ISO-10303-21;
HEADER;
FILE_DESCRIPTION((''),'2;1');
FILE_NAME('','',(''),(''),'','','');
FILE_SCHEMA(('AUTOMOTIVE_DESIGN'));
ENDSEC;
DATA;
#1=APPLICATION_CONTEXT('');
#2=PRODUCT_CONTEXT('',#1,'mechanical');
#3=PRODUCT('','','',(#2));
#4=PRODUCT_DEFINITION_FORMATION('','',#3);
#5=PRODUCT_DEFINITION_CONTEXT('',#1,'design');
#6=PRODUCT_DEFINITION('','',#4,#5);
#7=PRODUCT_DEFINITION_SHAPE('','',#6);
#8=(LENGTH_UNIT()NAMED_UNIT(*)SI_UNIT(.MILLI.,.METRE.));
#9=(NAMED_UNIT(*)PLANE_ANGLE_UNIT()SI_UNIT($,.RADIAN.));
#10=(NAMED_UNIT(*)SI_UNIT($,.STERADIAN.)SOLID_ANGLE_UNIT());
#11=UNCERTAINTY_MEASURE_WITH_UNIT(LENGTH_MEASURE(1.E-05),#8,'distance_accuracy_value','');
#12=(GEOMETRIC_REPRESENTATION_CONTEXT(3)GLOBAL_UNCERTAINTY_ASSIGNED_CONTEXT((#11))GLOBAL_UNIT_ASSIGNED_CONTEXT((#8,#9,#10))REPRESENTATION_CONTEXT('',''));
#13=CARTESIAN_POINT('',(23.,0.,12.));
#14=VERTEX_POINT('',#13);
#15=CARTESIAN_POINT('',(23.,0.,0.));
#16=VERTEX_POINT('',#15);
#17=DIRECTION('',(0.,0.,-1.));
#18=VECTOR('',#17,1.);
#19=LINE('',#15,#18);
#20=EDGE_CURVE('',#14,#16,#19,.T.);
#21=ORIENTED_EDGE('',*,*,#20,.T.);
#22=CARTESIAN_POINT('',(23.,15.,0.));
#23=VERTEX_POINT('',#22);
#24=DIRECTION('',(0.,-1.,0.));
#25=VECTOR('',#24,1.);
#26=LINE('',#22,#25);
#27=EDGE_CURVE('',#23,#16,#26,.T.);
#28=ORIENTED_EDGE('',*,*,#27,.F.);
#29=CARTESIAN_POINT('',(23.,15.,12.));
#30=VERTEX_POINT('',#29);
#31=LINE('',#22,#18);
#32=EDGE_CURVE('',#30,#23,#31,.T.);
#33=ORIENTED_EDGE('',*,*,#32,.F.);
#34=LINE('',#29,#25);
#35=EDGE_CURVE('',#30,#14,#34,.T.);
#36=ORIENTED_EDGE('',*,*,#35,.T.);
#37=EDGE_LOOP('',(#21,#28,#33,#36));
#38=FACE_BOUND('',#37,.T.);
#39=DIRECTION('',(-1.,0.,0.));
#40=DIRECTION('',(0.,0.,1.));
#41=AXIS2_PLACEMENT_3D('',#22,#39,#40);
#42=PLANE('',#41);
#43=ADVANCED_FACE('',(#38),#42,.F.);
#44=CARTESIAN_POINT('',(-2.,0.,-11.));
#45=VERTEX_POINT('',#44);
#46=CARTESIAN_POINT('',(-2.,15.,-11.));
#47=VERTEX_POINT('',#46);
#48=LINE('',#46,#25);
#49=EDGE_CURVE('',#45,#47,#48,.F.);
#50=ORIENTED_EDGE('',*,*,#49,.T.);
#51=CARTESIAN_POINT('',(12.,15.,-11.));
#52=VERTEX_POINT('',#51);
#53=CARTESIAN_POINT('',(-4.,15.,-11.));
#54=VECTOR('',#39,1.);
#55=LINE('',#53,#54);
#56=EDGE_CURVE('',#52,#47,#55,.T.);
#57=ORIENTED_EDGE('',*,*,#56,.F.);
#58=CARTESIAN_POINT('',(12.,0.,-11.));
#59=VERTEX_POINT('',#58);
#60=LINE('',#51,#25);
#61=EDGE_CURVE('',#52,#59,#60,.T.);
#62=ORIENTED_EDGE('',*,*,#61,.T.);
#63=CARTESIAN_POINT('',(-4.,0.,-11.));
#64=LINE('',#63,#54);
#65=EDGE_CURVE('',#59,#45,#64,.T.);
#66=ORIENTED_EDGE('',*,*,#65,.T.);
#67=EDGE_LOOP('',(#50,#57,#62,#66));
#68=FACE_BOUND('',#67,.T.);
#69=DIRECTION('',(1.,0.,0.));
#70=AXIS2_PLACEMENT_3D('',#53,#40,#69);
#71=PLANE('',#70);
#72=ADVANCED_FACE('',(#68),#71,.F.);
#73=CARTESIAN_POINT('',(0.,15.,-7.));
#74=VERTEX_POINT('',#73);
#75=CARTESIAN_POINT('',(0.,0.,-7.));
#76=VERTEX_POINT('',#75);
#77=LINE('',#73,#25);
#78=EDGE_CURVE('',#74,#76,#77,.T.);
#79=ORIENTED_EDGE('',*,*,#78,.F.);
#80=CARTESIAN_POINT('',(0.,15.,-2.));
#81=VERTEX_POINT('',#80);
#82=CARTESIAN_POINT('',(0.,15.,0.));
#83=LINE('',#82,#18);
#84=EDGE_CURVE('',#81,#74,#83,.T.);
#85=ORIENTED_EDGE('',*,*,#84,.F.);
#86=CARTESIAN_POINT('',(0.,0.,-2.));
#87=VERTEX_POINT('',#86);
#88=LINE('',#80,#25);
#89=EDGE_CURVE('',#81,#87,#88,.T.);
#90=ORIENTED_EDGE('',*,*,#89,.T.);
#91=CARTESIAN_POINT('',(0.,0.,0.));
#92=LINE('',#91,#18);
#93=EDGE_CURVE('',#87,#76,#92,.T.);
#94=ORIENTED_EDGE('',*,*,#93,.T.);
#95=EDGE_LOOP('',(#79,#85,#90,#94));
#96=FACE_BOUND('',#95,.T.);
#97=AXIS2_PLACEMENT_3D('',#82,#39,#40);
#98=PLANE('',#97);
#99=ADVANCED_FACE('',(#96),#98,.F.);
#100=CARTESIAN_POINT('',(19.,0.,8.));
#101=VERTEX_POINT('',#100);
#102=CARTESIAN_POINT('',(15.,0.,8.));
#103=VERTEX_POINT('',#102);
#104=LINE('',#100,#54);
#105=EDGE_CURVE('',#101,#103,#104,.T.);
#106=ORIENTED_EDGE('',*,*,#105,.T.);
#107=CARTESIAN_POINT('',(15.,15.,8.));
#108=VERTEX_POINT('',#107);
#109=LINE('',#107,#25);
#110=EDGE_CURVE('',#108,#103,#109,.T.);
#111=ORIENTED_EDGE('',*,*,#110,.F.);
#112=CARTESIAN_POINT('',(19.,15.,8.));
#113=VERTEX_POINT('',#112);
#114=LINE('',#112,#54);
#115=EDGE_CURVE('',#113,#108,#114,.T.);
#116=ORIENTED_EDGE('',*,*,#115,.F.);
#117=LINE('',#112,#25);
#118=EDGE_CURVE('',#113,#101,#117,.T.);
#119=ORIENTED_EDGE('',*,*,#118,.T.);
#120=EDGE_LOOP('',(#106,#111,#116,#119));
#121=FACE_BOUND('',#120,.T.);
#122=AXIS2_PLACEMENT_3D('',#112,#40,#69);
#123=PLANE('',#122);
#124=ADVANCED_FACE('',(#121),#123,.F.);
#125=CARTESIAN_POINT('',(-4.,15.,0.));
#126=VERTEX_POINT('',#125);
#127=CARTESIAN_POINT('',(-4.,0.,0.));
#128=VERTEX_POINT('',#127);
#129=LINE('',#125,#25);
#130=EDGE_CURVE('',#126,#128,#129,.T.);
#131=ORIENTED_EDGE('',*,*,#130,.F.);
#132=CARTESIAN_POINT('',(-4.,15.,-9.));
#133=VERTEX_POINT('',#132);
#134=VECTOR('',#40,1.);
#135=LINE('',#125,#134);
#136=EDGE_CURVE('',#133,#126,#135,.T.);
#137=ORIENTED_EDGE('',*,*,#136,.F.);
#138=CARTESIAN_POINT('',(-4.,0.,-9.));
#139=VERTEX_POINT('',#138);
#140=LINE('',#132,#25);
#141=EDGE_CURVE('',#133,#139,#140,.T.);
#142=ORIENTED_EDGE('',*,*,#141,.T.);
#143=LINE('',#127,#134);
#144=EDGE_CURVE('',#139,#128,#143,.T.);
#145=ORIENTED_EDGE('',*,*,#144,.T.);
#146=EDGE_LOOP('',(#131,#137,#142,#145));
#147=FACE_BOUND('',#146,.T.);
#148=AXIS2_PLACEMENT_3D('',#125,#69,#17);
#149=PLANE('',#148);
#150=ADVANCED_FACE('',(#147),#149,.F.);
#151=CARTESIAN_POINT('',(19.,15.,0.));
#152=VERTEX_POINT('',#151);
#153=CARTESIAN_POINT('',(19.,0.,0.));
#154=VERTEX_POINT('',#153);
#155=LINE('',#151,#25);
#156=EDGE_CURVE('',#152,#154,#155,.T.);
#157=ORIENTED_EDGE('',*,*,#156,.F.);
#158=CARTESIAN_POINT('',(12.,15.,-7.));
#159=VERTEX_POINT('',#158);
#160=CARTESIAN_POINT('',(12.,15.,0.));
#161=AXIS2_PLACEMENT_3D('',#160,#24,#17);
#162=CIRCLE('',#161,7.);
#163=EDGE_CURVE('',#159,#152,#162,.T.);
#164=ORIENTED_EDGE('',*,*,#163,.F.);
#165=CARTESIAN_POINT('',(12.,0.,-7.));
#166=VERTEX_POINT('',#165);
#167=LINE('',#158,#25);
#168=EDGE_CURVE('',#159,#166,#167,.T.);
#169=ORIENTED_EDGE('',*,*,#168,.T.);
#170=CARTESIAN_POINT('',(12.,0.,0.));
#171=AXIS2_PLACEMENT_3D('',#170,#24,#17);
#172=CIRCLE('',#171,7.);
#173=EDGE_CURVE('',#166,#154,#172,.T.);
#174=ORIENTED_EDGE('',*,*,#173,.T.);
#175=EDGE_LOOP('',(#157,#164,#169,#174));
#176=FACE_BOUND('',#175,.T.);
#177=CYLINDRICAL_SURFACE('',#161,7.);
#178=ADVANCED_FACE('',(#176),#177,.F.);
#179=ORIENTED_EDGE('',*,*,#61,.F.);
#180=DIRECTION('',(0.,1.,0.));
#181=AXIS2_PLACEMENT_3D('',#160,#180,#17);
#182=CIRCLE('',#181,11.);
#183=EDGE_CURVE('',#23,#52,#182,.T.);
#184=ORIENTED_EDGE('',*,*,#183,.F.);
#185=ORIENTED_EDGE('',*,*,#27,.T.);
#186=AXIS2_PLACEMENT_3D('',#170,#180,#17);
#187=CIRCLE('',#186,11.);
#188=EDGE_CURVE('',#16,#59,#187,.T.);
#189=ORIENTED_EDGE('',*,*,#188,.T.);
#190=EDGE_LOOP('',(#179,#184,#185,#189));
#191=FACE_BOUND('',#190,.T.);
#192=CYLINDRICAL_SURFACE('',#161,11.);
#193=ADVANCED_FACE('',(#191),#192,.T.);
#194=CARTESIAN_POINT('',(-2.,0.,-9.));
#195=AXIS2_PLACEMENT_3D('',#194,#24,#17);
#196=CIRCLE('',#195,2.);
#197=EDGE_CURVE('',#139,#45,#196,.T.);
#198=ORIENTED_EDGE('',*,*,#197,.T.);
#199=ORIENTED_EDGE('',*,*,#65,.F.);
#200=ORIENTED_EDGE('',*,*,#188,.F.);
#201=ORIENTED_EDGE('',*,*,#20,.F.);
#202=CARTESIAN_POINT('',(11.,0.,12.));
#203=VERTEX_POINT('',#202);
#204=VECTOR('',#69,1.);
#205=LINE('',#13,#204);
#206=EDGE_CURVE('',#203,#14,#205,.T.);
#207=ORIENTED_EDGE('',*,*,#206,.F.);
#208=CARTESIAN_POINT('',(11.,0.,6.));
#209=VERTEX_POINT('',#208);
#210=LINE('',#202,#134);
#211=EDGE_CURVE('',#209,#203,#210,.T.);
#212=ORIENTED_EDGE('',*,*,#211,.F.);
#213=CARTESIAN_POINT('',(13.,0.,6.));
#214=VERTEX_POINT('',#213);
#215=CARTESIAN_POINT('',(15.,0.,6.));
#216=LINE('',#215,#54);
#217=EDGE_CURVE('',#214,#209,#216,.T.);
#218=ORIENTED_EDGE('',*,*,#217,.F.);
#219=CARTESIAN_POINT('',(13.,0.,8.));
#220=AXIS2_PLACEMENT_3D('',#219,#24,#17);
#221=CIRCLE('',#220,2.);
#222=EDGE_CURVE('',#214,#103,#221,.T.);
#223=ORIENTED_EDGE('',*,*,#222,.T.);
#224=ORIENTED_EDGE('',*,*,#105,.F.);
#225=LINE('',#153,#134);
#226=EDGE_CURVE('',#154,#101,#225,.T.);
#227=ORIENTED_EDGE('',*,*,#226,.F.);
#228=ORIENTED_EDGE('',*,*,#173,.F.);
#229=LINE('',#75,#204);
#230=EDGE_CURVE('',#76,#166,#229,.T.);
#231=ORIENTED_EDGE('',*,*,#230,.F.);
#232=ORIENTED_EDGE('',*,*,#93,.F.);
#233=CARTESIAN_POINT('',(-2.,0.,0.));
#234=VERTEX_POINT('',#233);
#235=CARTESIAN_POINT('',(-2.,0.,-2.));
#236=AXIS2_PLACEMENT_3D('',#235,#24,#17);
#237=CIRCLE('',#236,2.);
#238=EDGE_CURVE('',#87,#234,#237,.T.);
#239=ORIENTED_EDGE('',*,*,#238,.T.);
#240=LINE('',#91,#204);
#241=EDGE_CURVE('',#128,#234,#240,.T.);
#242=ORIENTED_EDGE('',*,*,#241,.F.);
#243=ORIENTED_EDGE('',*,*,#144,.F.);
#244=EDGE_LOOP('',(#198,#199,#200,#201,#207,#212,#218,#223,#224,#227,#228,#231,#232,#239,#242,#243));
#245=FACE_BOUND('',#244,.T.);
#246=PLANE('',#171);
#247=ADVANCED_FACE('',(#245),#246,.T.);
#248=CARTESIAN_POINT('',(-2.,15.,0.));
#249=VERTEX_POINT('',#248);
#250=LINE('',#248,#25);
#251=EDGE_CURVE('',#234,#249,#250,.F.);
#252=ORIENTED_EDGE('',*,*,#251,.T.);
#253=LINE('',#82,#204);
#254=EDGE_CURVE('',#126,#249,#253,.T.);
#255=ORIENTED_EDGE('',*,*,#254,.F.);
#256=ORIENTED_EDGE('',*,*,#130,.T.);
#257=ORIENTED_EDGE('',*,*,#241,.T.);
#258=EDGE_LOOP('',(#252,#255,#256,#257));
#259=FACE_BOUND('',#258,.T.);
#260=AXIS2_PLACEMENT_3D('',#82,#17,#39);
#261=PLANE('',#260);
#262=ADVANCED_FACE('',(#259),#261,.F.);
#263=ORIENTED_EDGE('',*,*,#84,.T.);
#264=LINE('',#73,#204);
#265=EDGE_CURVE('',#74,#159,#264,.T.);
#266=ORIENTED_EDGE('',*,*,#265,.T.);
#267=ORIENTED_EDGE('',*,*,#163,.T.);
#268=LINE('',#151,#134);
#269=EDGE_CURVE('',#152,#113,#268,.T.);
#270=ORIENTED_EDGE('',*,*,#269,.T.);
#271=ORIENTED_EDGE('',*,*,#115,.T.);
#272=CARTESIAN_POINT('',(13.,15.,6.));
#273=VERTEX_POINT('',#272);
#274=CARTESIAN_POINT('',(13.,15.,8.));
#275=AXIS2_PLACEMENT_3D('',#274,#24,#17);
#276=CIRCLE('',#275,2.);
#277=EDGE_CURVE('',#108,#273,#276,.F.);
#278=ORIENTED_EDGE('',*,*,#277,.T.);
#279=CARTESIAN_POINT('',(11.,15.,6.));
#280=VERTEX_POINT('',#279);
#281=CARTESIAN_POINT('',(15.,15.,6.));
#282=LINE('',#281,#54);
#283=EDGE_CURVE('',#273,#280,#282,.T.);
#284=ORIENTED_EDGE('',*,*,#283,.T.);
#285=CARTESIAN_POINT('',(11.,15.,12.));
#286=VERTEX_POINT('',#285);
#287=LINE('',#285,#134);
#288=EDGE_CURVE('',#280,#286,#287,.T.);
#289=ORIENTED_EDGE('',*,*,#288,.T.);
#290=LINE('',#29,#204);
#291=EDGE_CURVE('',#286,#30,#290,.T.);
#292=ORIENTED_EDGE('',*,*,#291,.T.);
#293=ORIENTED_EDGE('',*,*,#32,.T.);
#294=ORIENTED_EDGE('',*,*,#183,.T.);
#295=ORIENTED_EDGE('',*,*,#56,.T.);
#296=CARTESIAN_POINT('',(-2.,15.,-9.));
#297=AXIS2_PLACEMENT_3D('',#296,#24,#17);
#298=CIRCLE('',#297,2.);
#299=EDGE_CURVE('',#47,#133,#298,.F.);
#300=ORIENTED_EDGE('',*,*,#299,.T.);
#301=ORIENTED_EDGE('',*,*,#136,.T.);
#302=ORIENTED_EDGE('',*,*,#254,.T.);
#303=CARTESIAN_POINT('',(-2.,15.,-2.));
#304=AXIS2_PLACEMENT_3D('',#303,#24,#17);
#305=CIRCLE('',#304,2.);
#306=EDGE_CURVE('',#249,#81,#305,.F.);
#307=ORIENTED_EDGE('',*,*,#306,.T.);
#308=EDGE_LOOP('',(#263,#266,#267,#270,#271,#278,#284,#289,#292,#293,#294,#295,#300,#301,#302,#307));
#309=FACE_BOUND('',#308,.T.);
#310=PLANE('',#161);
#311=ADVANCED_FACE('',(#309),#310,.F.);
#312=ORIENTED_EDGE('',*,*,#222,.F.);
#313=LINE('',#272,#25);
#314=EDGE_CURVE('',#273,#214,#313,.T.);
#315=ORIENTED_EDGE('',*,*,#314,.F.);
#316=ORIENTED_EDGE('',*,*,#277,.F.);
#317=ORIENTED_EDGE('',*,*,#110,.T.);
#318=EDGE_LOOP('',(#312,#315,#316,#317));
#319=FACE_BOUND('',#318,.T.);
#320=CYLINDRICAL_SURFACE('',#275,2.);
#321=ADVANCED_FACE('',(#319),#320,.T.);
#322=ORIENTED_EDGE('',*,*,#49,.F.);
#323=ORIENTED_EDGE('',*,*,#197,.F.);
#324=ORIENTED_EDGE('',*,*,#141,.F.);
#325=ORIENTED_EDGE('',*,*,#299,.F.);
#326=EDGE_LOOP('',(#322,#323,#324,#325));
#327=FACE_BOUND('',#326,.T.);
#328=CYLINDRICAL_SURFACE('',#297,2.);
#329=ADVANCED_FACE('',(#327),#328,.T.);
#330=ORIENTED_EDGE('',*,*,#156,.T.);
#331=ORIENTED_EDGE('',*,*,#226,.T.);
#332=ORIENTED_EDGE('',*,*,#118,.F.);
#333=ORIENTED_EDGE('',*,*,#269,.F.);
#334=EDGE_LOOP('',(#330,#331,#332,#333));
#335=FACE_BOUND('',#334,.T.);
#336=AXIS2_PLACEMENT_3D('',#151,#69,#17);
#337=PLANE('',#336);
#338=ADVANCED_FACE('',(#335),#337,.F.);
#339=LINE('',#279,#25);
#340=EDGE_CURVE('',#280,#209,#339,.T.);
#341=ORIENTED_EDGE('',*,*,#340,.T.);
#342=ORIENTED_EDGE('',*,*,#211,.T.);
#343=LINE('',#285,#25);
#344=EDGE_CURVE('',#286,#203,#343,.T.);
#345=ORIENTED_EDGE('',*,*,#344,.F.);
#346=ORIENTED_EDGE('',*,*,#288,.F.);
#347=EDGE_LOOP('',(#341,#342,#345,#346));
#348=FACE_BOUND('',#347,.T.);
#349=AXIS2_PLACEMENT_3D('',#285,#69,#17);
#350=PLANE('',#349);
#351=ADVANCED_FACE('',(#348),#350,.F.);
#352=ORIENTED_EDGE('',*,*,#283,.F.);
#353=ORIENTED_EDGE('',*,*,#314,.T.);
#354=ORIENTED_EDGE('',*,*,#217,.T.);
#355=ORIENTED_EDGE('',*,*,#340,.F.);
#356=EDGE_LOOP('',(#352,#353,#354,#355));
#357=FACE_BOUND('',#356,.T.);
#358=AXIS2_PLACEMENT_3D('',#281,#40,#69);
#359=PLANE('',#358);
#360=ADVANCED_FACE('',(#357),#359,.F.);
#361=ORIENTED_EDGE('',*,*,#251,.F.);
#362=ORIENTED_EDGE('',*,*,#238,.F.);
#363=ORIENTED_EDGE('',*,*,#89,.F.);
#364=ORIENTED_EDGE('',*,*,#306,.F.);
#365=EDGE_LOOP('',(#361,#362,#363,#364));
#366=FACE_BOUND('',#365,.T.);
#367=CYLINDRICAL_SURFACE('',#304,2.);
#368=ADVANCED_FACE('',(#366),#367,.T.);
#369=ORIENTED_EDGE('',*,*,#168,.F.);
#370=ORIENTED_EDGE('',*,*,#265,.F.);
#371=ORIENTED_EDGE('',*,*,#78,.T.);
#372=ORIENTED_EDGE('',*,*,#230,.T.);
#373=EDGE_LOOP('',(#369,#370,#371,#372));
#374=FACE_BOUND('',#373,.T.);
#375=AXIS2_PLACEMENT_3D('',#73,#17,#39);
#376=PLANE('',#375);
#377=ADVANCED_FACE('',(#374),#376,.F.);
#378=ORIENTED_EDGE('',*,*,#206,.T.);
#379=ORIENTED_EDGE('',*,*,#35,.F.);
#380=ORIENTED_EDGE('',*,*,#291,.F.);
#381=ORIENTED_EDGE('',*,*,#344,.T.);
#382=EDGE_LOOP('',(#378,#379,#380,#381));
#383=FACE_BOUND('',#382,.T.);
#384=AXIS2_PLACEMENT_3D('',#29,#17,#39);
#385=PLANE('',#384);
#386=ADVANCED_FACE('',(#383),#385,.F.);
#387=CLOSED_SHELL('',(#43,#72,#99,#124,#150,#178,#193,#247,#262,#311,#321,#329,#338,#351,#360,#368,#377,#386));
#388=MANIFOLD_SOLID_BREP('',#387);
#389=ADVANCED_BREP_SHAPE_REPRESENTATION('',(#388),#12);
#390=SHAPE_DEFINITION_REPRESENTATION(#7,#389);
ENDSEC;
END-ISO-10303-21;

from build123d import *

# Parameters (mm, degrees)
BOSS_EXTRUDE1_DEPTH = 15
FILLET1_R           = 2


with BuildPart() as part:
    # Sketch1 → Boss-Extrude1 (new body)
    with BuildSketch(Plane(origin=(0, 0, 0), x_dir=(1, 0, 0), z_dir=(0, 1, 0))):
        with BuildLine():
            Line((0, 0), (0, 7))
            Line((0, 7), (12, 7))
            ThreePointArc((12, 7), (16.949747468, 4.949747468), (19, 0))
            Line((19, 0), (19, -8))
            Line((19, -8), (15, -8))
            Line((15, -8), (15, -6))
            Line((15, -6), (11, -6))
            Line((11, -6), (11, -12))
            Line((11, -12), (23, -12))
            Line((23, -12), (23, 0))
            ThreePointArc((23, 0), (19.778174593, 7.778174593), (12, 11))
            Line((12, 11), (-4, 11))
            Line((-4, 11), (-4, 0))
            Line((-4, 0), (0, 0))
        make_face()
    extrude(amount=BOSS_EXTRUDE1_DEPTH)

    # Fillet1
    fillet1_edges = [part.edges().sort_by_distance(p)[0] for p in [
        (15, 7.5, 6),
        (0, 7.5, 0),
        (-4, 7.5, -11),
    ]]
    fillet(fillet1_edges, radius=FILLET1_R - 0.0001)  # a hair under: the kernel refuses the full size


solid = part.part
